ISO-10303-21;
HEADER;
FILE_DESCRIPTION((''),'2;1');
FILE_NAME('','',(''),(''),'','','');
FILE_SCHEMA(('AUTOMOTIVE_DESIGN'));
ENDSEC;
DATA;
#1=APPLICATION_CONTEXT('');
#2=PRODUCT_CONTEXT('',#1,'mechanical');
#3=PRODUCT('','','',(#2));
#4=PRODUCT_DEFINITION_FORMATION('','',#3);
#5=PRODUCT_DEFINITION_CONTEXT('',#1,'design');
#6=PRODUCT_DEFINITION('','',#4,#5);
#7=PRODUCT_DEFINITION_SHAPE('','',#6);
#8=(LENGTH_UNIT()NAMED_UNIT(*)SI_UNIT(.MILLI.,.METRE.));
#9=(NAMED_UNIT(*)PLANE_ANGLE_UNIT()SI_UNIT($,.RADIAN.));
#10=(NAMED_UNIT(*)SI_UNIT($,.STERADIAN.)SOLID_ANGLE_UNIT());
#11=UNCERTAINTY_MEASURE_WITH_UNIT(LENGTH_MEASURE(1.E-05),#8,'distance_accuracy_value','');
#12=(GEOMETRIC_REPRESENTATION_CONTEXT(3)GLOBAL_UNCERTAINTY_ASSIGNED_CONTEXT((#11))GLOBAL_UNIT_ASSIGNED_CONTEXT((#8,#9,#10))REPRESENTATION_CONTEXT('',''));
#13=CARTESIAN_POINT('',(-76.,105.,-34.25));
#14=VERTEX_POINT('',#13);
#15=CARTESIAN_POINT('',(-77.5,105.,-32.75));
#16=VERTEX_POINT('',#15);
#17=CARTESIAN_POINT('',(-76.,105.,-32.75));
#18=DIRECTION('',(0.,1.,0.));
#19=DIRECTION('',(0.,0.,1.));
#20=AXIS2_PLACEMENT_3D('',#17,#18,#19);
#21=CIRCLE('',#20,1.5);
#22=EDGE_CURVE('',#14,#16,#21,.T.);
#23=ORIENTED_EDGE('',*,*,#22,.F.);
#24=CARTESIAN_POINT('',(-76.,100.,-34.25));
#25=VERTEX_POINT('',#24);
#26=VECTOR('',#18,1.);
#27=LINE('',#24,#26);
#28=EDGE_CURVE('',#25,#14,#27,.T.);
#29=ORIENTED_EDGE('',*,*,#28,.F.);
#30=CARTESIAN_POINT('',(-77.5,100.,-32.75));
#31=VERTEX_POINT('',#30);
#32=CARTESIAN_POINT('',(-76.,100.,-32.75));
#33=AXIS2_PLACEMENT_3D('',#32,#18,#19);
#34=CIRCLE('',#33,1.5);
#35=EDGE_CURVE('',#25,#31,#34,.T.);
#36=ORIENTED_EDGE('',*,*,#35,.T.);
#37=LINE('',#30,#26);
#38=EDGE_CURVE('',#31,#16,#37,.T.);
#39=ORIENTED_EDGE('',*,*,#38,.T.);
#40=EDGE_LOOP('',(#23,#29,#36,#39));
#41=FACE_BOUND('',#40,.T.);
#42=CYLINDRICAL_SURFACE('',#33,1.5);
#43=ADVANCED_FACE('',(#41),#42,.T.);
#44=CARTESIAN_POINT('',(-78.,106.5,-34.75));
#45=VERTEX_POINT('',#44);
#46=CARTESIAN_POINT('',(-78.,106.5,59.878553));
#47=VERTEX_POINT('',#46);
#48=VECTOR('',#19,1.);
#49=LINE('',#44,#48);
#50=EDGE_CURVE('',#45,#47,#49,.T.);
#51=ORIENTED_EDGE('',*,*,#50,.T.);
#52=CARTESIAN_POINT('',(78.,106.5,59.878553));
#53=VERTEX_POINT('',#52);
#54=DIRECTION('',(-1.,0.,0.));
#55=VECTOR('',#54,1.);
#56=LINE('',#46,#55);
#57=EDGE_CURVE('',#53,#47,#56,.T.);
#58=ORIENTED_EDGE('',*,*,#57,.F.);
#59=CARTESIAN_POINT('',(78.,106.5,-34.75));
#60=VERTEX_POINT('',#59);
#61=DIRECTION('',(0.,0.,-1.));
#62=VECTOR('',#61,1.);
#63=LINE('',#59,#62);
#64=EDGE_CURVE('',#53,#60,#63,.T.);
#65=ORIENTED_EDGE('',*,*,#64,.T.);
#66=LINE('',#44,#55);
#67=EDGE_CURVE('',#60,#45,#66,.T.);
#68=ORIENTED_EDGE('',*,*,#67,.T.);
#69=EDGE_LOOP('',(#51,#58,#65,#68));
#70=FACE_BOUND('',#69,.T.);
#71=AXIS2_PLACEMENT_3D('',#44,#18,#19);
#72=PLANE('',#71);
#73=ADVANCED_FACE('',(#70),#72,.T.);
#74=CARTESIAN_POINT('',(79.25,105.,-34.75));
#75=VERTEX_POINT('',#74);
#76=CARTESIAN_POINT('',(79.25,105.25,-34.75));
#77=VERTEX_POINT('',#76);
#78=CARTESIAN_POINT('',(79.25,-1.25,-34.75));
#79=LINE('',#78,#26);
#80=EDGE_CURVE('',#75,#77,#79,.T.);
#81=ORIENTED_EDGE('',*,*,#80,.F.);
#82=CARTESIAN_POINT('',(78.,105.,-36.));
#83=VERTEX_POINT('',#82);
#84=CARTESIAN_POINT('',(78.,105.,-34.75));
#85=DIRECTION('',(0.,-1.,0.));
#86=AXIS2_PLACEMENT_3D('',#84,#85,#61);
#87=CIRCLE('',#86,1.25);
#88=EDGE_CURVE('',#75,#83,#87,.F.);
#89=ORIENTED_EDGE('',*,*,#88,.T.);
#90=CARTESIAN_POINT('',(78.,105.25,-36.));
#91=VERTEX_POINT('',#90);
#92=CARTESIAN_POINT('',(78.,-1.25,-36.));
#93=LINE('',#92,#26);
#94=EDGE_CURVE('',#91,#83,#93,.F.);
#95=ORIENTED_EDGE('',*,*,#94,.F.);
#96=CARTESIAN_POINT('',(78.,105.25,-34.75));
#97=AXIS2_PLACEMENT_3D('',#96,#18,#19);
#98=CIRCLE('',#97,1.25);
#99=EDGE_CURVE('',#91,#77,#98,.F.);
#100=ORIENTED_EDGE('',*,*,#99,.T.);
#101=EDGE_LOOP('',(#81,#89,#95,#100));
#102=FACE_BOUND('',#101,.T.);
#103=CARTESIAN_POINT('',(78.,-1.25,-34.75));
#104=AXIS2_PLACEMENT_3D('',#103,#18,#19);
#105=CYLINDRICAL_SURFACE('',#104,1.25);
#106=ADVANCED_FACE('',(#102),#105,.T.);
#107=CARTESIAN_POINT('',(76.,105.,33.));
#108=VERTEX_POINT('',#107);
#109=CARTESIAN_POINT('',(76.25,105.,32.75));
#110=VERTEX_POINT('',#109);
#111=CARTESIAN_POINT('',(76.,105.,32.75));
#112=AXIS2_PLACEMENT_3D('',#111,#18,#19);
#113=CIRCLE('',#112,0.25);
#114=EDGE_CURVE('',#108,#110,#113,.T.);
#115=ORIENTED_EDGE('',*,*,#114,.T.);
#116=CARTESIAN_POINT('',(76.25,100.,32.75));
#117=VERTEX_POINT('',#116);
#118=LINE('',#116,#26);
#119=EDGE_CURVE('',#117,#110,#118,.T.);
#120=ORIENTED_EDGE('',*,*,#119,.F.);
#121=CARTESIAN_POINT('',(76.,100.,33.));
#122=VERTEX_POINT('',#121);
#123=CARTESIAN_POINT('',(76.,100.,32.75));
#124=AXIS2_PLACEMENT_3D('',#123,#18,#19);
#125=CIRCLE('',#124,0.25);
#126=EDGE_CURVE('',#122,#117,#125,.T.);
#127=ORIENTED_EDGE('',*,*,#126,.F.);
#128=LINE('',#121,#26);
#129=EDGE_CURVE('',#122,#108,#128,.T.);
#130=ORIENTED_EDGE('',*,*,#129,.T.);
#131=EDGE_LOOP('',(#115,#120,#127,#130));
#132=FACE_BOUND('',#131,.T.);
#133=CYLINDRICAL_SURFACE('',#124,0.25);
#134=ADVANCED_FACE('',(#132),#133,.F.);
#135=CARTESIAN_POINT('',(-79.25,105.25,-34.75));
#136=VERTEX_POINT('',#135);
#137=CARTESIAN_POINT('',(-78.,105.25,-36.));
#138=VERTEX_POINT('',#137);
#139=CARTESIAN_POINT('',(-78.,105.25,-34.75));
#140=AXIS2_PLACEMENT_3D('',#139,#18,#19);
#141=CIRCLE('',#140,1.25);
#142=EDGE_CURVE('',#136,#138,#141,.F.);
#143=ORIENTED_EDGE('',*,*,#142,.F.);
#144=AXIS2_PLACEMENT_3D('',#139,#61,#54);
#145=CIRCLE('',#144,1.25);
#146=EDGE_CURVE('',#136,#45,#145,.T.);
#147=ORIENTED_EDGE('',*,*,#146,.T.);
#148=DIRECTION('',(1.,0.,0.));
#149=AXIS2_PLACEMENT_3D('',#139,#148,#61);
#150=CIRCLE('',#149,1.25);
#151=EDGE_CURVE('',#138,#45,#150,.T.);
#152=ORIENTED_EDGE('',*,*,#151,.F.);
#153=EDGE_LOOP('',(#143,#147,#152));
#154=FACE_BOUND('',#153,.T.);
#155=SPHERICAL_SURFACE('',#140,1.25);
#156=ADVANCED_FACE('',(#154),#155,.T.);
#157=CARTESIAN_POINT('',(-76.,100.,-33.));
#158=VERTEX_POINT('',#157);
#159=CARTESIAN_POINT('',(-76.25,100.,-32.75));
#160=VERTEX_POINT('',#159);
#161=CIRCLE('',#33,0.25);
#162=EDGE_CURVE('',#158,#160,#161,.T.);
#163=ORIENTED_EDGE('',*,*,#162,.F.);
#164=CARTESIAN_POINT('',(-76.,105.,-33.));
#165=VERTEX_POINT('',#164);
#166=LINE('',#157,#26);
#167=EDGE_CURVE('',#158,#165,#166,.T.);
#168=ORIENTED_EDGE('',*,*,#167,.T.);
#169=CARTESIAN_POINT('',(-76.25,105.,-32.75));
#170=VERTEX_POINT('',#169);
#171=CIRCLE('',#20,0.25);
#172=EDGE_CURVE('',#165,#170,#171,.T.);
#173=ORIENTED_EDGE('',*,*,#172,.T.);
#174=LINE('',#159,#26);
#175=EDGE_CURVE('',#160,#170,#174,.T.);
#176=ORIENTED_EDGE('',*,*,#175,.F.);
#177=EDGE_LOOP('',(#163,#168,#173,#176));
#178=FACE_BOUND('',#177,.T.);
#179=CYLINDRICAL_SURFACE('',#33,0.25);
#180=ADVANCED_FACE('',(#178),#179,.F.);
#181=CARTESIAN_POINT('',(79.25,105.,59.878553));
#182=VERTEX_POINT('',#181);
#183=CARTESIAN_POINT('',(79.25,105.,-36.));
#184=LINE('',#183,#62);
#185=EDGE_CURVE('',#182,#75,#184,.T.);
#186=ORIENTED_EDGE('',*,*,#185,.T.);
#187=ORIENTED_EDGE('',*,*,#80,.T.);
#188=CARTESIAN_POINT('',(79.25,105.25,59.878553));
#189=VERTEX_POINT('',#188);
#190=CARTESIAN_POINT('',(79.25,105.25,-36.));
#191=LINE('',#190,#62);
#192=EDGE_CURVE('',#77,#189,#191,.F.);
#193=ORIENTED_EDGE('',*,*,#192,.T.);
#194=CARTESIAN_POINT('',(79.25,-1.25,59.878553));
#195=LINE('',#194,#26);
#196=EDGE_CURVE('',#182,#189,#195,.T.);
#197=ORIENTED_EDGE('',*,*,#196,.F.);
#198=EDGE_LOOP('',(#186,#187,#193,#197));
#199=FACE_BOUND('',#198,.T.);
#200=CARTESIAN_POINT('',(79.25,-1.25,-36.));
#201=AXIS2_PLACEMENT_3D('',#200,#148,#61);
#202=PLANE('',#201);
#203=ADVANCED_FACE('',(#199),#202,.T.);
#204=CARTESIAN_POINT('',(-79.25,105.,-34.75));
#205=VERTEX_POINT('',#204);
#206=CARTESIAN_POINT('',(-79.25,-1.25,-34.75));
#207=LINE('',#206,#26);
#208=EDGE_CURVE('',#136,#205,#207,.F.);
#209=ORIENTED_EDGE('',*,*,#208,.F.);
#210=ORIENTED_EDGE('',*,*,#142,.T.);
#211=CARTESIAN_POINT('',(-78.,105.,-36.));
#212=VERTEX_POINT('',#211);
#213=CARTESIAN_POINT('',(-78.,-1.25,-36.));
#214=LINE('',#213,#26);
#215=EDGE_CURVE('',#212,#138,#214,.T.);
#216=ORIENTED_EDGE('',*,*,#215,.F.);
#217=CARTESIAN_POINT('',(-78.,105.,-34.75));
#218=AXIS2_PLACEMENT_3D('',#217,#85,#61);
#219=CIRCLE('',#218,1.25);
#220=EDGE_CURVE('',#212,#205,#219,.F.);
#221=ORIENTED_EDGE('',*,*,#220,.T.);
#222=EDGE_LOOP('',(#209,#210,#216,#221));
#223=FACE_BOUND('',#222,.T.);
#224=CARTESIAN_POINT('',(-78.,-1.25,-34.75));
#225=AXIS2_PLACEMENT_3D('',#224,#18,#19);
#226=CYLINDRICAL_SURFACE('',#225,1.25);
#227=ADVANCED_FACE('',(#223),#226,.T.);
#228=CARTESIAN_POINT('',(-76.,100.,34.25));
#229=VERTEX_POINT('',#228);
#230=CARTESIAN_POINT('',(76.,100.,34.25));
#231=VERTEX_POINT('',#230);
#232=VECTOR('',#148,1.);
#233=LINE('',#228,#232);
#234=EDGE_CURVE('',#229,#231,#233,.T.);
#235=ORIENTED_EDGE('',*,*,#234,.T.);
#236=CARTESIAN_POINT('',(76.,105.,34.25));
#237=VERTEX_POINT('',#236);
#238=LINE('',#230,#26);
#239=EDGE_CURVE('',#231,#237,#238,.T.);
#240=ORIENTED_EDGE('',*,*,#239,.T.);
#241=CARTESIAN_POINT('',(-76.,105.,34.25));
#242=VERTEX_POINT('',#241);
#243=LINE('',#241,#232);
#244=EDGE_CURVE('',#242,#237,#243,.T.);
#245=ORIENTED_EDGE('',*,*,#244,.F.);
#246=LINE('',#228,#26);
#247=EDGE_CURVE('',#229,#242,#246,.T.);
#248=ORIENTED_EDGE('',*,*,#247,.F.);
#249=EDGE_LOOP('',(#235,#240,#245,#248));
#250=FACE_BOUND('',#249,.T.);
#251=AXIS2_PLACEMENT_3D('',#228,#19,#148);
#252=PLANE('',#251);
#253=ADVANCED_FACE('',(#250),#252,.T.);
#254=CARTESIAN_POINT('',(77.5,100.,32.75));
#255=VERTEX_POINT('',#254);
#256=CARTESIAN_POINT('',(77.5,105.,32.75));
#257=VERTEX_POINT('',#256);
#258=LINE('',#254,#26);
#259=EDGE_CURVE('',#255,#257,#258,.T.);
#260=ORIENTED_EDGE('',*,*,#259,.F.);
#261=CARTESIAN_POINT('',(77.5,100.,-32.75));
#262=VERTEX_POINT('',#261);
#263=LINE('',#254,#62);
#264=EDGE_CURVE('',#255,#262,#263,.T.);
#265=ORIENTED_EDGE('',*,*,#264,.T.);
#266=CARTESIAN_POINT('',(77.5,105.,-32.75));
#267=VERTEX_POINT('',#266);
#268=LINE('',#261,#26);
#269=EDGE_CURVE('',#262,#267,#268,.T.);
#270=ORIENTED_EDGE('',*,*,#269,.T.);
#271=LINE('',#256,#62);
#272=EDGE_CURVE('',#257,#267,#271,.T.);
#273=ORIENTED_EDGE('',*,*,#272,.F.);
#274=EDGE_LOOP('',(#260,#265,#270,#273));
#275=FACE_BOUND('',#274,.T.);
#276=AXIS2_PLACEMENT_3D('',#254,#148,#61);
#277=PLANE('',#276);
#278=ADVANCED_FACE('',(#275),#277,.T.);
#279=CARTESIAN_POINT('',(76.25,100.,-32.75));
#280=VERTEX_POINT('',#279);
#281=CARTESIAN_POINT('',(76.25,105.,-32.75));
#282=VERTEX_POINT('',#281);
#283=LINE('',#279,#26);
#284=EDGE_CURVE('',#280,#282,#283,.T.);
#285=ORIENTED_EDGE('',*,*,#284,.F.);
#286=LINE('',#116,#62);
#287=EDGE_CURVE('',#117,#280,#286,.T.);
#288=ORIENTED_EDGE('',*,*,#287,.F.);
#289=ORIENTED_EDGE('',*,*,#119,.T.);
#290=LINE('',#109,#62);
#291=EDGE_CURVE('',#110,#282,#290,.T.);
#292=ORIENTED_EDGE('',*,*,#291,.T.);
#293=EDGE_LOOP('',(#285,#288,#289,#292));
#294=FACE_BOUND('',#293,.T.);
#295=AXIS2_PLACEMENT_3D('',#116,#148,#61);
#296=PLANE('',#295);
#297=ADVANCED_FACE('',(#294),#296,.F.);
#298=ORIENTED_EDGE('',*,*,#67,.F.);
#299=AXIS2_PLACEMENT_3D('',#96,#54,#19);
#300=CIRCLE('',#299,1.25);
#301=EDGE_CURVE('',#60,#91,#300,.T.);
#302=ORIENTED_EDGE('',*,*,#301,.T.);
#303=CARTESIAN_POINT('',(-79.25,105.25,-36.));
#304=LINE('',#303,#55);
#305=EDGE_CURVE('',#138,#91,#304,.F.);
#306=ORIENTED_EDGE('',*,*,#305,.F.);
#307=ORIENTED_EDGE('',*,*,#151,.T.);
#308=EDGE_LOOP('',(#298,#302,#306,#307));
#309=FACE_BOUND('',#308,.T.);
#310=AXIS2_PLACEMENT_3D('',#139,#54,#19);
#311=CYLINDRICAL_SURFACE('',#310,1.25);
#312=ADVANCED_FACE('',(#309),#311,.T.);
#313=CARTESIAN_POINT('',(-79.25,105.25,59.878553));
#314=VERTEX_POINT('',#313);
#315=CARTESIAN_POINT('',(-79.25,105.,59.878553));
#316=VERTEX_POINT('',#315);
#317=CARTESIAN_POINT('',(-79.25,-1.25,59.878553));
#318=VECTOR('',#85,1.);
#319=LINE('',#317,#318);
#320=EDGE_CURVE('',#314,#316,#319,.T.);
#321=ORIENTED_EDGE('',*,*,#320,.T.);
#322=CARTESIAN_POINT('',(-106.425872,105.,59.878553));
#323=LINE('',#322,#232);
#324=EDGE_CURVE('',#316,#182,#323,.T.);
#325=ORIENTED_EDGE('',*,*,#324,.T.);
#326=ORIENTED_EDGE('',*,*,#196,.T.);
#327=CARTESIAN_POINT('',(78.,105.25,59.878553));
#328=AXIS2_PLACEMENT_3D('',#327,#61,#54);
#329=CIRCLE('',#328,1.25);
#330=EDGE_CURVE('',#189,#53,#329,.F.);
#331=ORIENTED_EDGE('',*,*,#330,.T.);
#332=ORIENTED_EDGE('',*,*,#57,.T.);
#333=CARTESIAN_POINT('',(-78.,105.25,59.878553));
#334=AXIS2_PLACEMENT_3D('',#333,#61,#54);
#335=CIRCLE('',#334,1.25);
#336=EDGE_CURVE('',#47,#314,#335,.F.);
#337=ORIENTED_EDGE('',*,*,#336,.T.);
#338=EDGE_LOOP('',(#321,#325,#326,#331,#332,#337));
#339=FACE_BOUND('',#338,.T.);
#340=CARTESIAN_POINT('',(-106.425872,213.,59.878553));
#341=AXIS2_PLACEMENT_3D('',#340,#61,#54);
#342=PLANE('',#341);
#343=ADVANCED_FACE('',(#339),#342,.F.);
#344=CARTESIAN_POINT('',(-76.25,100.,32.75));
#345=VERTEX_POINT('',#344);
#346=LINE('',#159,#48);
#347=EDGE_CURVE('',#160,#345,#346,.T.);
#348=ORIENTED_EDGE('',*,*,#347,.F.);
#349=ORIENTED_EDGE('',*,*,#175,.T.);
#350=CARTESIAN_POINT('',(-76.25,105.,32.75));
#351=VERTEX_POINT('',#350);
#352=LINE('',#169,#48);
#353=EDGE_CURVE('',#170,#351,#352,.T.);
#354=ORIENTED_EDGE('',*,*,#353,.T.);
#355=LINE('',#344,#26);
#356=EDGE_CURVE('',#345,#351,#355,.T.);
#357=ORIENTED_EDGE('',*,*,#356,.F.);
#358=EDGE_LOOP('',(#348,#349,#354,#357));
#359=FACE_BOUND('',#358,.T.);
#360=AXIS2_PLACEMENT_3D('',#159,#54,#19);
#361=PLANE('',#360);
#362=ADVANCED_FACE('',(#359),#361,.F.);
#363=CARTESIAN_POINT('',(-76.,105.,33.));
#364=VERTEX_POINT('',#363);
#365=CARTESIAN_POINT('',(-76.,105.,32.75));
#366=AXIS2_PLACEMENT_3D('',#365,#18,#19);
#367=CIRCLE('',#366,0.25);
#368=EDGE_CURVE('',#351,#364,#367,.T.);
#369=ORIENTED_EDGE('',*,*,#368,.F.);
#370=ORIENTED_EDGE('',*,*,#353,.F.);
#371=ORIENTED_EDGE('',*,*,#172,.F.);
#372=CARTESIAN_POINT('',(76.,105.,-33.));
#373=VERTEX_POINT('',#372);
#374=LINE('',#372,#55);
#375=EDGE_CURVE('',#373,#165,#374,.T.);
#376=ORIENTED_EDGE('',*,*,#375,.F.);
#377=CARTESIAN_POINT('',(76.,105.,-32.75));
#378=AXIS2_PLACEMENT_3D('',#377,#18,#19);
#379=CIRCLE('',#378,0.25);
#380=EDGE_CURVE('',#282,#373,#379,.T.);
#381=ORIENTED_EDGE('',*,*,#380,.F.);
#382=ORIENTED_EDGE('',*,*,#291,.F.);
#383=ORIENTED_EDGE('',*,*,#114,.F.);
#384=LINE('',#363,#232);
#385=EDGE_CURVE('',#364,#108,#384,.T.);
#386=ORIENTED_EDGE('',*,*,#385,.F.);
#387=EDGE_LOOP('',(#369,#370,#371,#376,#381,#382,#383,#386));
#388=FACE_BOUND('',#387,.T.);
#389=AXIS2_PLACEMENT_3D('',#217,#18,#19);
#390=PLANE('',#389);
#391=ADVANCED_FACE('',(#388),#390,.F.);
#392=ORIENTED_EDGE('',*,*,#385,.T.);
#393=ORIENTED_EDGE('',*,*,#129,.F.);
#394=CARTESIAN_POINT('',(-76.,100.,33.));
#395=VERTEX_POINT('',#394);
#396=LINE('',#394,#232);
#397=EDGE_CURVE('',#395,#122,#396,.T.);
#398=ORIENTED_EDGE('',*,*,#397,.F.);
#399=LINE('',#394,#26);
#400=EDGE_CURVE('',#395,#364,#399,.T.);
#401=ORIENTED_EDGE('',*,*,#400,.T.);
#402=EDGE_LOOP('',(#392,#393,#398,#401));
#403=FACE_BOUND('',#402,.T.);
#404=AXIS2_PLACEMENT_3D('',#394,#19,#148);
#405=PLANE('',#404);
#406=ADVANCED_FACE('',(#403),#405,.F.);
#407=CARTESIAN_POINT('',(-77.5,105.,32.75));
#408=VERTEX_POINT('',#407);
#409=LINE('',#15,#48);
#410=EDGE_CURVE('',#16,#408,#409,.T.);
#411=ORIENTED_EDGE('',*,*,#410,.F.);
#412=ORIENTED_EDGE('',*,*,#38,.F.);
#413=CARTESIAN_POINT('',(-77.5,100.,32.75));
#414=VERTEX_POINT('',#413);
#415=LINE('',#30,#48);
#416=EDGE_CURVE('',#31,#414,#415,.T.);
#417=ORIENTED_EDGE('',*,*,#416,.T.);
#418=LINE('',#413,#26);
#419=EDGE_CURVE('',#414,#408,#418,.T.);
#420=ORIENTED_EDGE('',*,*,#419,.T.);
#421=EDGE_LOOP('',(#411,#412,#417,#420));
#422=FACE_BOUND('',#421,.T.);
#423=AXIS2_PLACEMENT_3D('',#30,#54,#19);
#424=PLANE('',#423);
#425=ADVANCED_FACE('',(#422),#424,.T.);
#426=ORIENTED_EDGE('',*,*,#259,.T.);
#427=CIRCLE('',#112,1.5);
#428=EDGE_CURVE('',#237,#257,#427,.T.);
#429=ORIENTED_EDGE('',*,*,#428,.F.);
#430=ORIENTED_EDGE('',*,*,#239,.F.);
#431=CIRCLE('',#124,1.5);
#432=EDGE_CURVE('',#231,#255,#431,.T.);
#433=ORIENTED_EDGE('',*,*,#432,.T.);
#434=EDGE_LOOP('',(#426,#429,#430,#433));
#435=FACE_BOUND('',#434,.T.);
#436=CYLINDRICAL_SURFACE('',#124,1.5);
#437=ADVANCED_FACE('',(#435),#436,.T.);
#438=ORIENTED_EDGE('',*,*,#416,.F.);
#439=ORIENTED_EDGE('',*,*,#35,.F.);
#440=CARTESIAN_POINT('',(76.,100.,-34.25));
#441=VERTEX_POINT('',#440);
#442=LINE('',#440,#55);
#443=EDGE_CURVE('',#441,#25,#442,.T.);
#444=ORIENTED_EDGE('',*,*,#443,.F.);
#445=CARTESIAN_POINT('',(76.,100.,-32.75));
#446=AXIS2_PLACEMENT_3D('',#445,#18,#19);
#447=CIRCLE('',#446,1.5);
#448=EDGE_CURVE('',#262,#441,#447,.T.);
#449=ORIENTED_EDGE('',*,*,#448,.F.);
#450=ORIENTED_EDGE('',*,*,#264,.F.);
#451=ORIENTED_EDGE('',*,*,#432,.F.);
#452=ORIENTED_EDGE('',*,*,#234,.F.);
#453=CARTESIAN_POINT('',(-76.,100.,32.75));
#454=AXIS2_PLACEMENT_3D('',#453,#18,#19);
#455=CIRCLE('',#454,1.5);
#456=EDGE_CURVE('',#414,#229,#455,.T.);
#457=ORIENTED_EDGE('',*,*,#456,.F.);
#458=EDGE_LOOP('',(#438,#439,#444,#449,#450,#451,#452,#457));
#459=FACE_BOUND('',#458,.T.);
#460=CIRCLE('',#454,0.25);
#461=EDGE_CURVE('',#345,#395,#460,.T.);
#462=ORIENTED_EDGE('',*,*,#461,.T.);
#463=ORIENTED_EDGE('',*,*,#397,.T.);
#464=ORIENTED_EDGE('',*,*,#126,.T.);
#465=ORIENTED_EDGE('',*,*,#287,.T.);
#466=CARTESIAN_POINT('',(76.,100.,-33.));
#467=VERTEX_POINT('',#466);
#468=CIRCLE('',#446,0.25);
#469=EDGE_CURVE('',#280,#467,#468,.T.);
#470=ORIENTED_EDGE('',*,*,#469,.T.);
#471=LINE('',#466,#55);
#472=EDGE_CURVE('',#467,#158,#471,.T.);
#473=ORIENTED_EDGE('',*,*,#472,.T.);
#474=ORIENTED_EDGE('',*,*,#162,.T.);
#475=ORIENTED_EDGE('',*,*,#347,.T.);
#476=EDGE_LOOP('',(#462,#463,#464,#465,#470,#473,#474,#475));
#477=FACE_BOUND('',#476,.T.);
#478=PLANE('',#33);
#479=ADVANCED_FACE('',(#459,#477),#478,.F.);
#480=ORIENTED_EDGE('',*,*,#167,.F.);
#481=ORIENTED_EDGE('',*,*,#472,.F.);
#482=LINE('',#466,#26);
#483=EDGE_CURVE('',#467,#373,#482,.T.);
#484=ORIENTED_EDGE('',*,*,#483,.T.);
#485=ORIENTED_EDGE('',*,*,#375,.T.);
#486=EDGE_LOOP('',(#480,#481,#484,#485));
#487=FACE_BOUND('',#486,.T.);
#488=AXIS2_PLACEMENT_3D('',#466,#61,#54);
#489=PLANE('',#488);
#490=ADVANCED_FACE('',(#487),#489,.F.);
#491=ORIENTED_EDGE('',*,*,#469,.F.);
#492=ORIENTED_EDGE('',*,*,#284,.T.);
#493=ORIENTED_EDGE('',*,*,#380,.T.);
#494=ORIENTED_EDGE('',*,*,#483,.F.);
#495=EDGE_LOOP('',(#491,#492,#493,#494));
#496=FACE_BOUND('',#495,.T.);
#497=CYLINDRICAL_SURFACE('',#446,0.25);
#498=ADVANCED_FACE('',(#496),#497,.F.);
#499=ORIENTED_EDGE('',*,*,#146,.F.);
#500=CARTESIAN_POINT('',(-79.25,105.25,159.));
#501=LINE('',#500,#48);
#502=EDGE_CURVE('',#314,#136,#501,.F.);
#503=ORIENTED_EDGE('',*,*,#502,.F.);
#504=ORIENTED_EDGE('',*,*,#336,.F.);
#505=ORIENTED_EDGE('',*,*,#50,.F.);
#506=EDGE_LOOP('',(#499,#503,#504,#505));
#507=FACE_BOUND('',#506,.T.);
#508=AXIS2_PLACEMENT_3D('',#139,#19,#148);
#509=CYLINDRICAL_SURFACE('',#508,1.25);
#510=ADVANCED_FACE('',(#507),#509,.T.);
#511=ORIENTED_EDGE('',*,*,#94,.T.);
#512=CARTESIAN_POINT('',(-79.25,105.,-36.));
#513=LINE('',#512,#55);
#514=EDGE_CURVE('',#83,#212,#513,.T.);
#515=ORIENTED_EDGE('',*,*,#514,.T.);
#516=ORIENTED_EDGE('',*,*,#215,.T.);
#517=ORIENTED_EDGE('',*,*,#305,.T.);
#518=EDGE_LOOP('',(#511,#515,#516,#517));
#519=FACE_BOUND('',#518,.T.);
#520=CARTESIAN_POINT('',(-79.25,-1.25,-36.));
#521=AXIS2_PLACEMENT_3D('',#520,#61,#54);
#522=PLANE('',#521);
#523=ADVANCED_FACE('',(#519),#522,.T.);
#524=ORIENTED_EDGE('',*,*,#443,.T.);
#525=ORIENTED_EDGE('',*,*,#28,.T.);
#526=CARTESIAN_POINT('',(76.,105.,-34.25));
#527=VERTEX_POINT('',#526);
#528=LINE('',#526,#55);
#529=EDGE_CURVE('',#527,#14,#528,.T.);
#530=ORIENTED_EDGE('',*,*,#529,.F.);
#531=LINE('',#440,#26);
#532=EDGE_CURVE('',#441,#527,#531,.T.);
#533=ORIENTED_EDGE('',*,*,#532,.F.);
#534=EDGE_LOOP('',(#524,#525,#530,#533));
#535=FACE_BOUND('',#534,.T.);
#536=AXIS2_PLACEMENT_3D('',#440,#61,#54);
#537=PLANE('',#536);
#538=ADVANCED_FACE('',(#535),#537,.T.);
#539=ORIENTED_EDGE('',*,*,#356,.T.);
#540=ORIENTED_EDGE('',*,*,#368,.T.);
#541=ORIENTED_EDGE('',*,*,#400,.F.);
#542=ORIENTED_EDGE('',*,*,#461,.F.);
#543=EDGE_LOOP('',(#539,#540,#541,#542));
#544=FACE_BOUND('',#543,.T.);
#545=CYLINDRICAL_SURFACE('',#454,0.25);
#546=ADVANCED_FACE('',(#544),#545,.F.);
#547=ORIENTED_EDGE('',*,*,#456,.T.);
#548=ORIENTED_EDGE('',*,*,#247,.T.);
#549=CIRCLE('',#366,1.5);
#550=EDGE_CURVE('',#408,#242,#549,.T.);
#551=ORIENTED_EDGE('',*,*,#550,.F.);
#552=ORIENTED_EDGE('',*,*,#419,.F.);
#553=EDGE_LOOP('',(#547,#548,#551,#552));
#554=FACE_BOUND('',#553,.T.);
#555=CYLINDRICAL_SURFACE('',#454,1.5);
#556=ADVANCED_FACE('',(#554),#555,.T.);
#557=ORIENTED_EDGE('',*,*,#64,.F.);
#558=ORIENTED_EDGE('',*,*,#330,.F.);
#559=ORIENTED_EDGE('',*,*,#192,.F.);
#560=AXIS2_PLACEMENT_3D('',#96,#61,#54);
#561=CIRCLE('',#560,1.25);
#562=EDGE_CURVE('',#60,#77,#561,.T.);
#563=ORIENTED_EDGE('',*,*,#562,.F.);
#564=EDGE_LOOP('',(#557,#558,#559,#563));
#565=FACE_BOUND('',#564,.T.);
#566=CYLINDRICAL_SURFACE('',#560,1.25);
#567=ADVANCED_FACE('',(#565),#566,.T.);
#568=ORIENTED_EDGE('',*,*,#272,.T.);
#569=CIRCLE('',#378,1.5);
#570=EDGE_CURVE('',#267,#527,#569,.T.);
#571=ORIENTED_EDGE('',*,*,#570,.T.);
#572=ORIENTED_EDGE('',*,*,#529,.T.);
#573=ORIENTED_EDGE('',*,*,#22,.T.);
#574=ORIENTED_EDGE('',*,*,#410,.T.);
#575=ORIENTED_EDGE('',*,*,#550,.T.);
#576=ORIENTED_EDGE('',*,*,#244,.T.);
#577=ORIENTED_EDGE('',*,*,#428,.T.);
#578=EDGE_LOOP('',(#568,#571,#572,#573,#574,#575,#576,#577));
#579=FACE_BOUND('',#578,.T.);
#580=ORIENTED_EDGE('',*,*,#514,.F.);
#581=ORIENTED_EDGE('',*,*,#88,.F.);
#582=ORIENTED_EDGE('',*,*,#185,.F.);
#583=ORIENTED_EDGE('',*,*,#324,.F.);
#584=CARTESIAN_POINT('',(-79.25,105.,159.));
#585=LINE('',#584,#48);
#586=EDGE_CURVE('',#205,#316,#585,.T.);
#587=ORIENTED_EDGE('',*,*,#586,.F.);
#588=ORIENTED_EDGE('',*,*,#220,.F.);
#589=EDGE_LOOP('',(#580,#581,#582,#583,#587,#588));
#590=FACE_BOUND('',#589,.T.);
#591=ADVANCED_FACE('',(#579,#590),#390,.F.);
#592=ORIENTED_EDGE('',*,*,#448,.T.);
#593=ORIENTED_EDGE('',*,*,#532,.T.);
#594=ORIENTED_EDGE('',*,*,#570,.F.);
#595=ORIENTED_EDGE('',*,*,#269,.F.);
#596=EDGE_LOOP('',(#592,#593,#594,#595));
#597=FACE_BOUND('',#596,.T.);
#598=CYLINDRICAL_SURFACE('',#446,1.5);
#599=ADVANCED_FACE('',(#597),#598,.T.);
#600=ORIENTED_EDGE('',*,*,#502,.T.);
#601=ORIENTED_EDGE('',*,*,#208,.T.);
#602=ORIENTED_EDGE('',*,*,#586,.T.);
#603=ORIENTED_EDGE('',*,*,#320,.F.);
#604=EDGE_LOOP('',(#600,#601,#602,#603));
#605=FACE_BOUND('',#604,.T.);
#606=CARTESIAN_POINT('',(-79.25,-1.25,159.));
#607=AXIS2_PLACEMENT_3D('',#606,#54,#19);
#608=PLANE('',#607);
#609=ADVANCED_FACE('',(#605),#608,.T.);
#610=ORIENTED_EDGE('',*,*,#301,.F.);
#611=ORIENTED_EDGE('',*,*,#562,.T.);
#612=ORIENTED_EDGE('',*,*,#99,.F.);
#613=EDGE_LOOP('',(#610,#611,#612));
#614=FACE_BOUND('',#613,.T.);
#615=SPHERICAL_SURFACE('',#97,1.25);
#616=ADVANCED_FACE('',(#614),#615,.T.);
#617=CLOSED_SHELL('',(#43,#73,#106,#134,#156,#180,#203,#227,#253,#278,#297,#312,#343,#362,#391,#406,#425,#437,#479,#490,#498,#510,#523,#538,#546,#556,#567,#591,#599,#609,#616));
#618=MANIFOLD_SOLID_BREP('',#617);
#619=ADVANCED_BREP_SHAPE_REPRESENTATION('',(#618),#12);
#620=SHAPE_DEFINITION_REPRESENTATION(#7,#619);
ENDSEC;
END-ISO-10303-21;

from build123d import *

# Parameters (mm, degrees)
BOSS_EXTRUDE1_DEPTH      = 1.25
SKETCH1_W                = 156
SKETCH1_H                = 69.5
BOSS_EXTRUDE2_DEPTH      = 105
SKETCH4_R                = 2.5000000000000027
BOSS_EXTRUDE3_DEPTH      = 8
FILLET2_R                = 2
SKETCH5_R                = 1.5499999999999998
SKETCH5_R_2              = 1.5500000000000012
CUT_EXTRUDE1_DEPTH       = 8
SKETCH6_R                = 8.25
CUT_EXTRUDE2_DEPTH       = 8
SKETCH8_R                = 3.750000000000007
SKETCH8_R_2              = 3.0000000000000084
SKETCH8_W                = 7.000000000000014
SKETCH8_H                = 14
CUT_EXTRUDE3_DEPTH       = 8
FILLET3_R                = 1.25
FILLET4_R                = 1.25
SKETCH11_R               = 1.5499999999999932
CUT_EXTRUDE4_DEPTH       = 8
BOSS_EXTRUDE5_REACH      = 209.004
FILLET5_R                = 1.25
SKETCH14_R               = 1.5249999999999995
CUT_EXTRUDE5_DEPTH       = 8
BOSS_EXTRUDE6_DEPTH      = 5
CUT_EXTRUDE10_DEPTH      = 176.50000000000017
CUT_EXTRUDE10_DEPTH_BACK = 9
SKETCH19_R               = 1.5249999999999995
BOSS_EXTRUDE7_DEPTH      = 1.5
SKETCH17_W               = 214.39373035957487
SKETCH17_H               = 311.75060194691184
CUT_EXTRUDE6_DEPTH       = 142.50000000000003
SKETCH18_W               = 843.8612520819788
SKETCH18_H               = 210.19069540658822
CUT_EXTRUDE7_DEPTH       = 211.50000000000009
FILLET6_R                = 1.25
SKETCH21_R               = 1.5249999999999995
CUT_EXTRUDE11_DEPTH      = 46.50000000000004
SKETCH22_R               = 1.5249999999999952
SKETCH22_R_2             = 0.49999999999999917
SKETCH22_R_3             = 0.9999999999999983
CUT_EXTRUDE12_DEPTH      = 46.50000000000004
SKETCH23_W               = 224.34927592813784
SKETCH23_H               = 20
CUT_EXTRUDE13_DEPTH      = 108.00000000000004
SKETCH24_W               = 223.8278832276348
SKETCH24_H               = 83.20006380200533
CUT_EXTRUDE14_DEPTH      = 108.00000000000004


with BuildPart() as part:
    # Sketch2 → Boss-Extrude1 (new body)
    with BuildSketch(Plane(origin=(0, 0, 0), x_dir=(1, 0, 0), z_dir=(0, 1, 0))):
        Polygon((-79.25000000000004, 35.99999999999998), (79.24999999999996, 35.99999999999999), (79.24999999999999, -159.00000000000003), (-79.25000000000001, -159.00000000000003), align=None)
    extrude(amount=-BOSS_EXTRUDE1_DEPTH)

    # Sketch1 → Boss-Extrude2 (add)
    with BuildSketch(Plane(origin=(0, 0, 0), x_dir=(1, 0, 0), z_dir=(0, 1, 0))):
        Polygon((79.24999999999999, -159.00000000000003), (-79.25000000000001, -159.00000000000003), (-79.25000000000004, -86.00000000000001), (-79.25000000000004, -36.00000000000002), (-79.25000000000004, 35.99999999999998), (79.24999999999996, 35.99999999999999), (79.24999999999996, -36.00000000000002), (79.24999999999996, -86.00000000000001), align=None)
        Polygon((-78.00000000000001, -157.75000000000006), (77.99999999999999, -157.75000000000006), (77.99999999999996, -86.00000000000001), (77.99999999999996, -36.00000000000002), (-78.00000000000004, -36.00000000000002), (-78.00000000000004, -86.00000000000001), (-78.00000000000004, -100.58859756900745), align=None, mode=Mode.SUBTRACT)
        Rectangle(SKETCH1_W, SKETCH1_H, mode=Mode.SUBTRACT)
    extrude(amount=BOSS_EXTRUDE2_DEPTH)

    # Sketch4 → Boss-Extrude3 (add)
    with BuildSketch(Plane(origin=(0, 0, 0), x_dir=(1, 0, 0), z_dir=(0, 1, 0))):
        with Locations(Location((-37.074999999999996, -117.75000000000004, 0), (0, 0, 90))):
            Circle(SKETCH4_R)
        with Locations(Location((37.074999999999996, -117.75000000000003, 0), (0, 0, 90))):
            Circle(SKETCH4_R)
    extrude(amount=BOSS_EXTRUDE3_DEPTH)

    # Fillet2
    fillet2_edges = [part.edges().sort_by_distance(p)[0] for p in [
        (77.99999999999996, 52.5, -34.749999999999986),
        (77.99999999999996, 52.5, 34.750000000000014),
        (-78.00000000000004, 0, 1.421e-14),
        (-78.00000000000004, 52.5, 34.750000000000014),
        (77.99999999999999, 52.5, 157.75000000000006),
        (-78.00000000000001, 52.5, 157.75000000000006),
        (-4.263e-14, 0, 36.00000000000002),
        (-78.00000000000004, 52.5, 36.00000000000002),
        (77.99999999999997, 0, 96.87500000000003),
        (77.99999999999996, 52.5, 36.00000000000002),
        (-4.263e-14, 0, -34.749999999999986),
        (-78.00000000000004, 52.5, -34.749999999999986),
        (-1.421e-14, 0, 157.75000000000006),
        (-78.00000000000003, 0, 96.87500000000004),
        (77.99999999999996, 0, 1.421e-14),
        (-4.263e-14, 0, 34.750000000000014),
        (-37.074999999999996, 0, 120.25000000000004),
        (37.074999999999996, 0, 120.25000000000003),
    ]]
    fillet(fillet2_edges, radius=FILLET2_R)

    # Sketch5 → Cut-Extrude1 (cut)
    with BuildSketch(Plane.XY.offset(36.00000000000002)):
        with BuildLine():
            ThreePointArc((-53.750000000000085, 99.54999999999998), (-54.84601551083924, 99.09601551083914), (-55.30000000000008, 97.99999999999999))
            Line((-55.30000000000008, 97.99999999999999), (-53.750000000000085, 97.99999999999999))
            Line((-53.750000000000085, 97.99999999999999), (-53.750000000000085, 99.54999999999998))
        make_face()
        with BuildLine():
            Line((-53.750000000000085, 97.99999999999999), (-55.30000000000008, 97.99999999999999))
            ThreePointArc((-55.30000000000008, 97.99999999999999), (-53.750000000000085, 96.44999999999999), (-52.20000000000009, 97.99999999999999))
            ThreePointArc((-52.20000000000009, 97.99999999999999), (-52.65398448916093, 99.09601551083914), (-53.750000000000085, 99.54999999999998))
            Line((-53.750000000000085, 99.54999999999998), (-53.750000000000085, 97.99999999999999))
        make_face()
        with Locations((53.750000000000206, 97.99999999999967)):
            Circle(SKETCH5_R)
        with Locations((-53.750000000000085, 7.999999999999743)):
            Circle(SKETCH5_R_2)
        with Locations((53.749999999999666, 7.9999999999994245)):
            Circle(SKETCH5_R_2)
    extrude(amount=-CUT_EXTRUDE1_DEPTH, mode=Mode.SUBTRACT)

    # Sketch6 → Cut-Extrude2 (cut)
    with BuildSketch(Plane(origin=(0, 0, 157.75000000000006), x_dir=(-1, 0, 0), z_dir=(0, 0, -1))):
        with Locations((0, 22)):
            Circle(SKETCH6_R)
    extrude(amount=-CUT_EXTRUDE2_DEPTH, mode=Mode.SUBTRACT)

    # Sketch8 → Cut-Extrude3 (cut)
    with BuildSketch(Plane.ZY.offset(79.25000000000004)):
        with Locations((131.5, 54.99999999999998)):
            Circle(SKETCH8_R)
        with Locations((101.50000000000001, 54.99999999999998)):
            Circle(SKETCH8_R_2)
        with Locations((116.50000000000003, 64.99999999999999)):
            Rectangle(SKETCH8_W, SKETCH8_H)
        with Locations((101.50000000000001, 64.99999999999997)):
            Circle(SKETCH8_R_2)
        with Locations((101.50000000000001, 74.99999999999997)):
            Circle(SKETCH8_R_2)
        with Locations((101.50000000000001, 84.99999999999997)):
            Circle(SKETCH8_R_2)
        with Locations((131.5, 74.99999999999999)):
            Circle(SKETCH8_R)
    extrude(amount=-CUT_EXTRUDE3_DEPTH, mode=Mode.SUBTRACT)

    # Fillet3
    fillet3_edges = [part.edges().sort_by_distance(p)[0] for p in [
        (79.24999999999997, -1.25, 61.50000000000002),
        (-4.263e-14, -1.25, -35.999999999999986),
        (-79.25000000000003, -1.25, 61.50000000000003),
        (-1.421e-14, -1.25, 159.00000000000003),
    ]]
    fillet(fillet3_edges, radius=FILLET3_R)

    # Fillet4
    # the kernel refuses this fillet: 1.25 mm, written as the material it takes off along each edge
    with BuildSketch(Plane(origin=(-78.00000000000004, 0, -34.74999999999997), x_dir=(-9e-17, 0, -1), z_dir=(-1, 0, 1.5e-16))) as fillet4_piece_1_section:
        Polygon((0, 0), (FILLET4_R, 0), (FILLET4_R, FILLET4_R), (0, FILLET4_R), align=None)
    fillet4_piece_1 = extrude(amount=FILLET4_R, mode=Mode.PRIVATE)
    fillet4_piece_1 = fillet4_piece_1 - Plane(origin=(-78.00000000000004, 0, -34.74999999999997), x_dir=(0, 0.7071067811865475, 0.7071067811865475), z_dir=(-1, 0, 1.5e-16)) * Sphere(FILLET4_R, mode=Mode.PRIVATE)
    add(fillet4_piece_1, mode=Mode.SUBTRACT)
    with BuildSketch(Plane(origin=(77.99999999999996, 0, -34.74999999999999), x_dir=(-9e-17, 0, -1), z_dir=(1, 0, -1.5e-16))) as fillet4_piece_2_section:
        Polygon((0, 0), (FILLET4_R, 0), (FILLET4_R, -FILLET4_R), (0, -FILLET4_R), align=None)
    fillet4_piece_2 = extrude(amount=FILLET4_R, mode=Mode.PRIVATE)
    fillet4_piece_2 = fillet4_piece_2 - Plane(origin=(77.99999999999996, 0, -34.74999999999999), x_dir=(0, 0.7071067811865475, 0.7071067811865475), z_dir=(1, 0, -1.5e-16)) * Sphere(FILLET4_R, mode=Mode.PRIVATE)
    add(fillet4_piece_2, mode=Mode.SUBTRACT)
    with BuildSketch(Plane(origin=(-78.00000000000001, 0, 157.75000000000003), x_dir=(-1, 0, 1.5e-16), z_dir=(0, 0, 1))) as fillet4_piece_3_section:
        Polygon((0, 0), (FILLET4_R, 0), (FILLET4_R, FILLET4_R), (0, FILLET4_R), align=None)
    fillet4_piece_3 = extrude(amount=FILLET4_R, mode=Mode.PRIVATE)
    fillet4_piece_3 = fillet4_piece_3 - Plane(origin=(-78.00000000000001, 0, 157.75000000000003), x_dir=(0.7071067811865475, 0.7071067811865475, 0), z_dir=(0, 0, 1)) * Sphere(FILLET4_R, mode=Mode.PRIVATE)
    add(fillet4_piece_3, mode=Mode.SUBTRACT)
    with BuildSketch(Plane(origin=(77.99999999999999, 0, 157.75000000000003), x_dir=(1, 0, -1.5e-16), z_dir=(0, 0, 1))) as fillet4_piece_4_section:
        Polygon((0, 0), (FILLET4_R, 0), (FILLET4_R, -FILLET4_R), (0, -FILLET4_R), align=None)
    fillet4_piece_4 = extrude(amount=FILLET4_R, mode=Mode.PRIVATE)
    fillet4_piece_4 = fillet4_piece_4 - Plane(origin=(77.99999999999999, 0, 157.75000000000003), x_dir=(-0.7071067811865475, 0.7071067811865475, 0), z_dir=(0, 0, 1)) * Sphere(FILLET4_R, mode=Mode.PRIVATE)
    add(fillet4_piece_4, mode=Mode.SUBTRACT)
    with BuildSketch(Plane(origin=(79.24999999999999, 108.12500000000007, 159.00000000000003), x_dir=(-1, 0, 0), z_dir=(0, -1, 0))) as fillet4_piece_5:
        with BuildLine():
            CenterArc((FILLET4_R, FILLET4_R), FILLET4_R, 179.9999999999987, 90.00000000000131)
            Line((0, FILLET4_R), (0, 0))
            Line((0, 0), (FILLET4_R, 0))
        make_face()
    extrude(amount=108.12500000000007, mode=Mode.SUBTRACT)
    with BuildSketch(Plane(origin=(-79.25000000000001, -2.2e-16, 159.00000000000003), x_dir=(1, 0, 0), z_dir=(0, 1, 0))) as fillet4_piece_6:
        with BuildLine():
            CenterArc((FILLET4_R, FILLET4_R), FILLET4_R, 180, 90)
            Line((0, FILLET4_R), (0, 0))
            Line((0, 0), (FILLET4_R, 0))
        make_face()
    extrude(amount=108.12499999999999, mode=Mode.SUBTRACT)
    with BuildSketch(Plane(origin=(79.24999999999996, 108.125, -35.99999999999999), x_dir=(0, 0, 1), z_dir=(0, -1, 0))) as fillet4_piece_7:
        with BuildLine():
            CenterArc((FILLET4_R, FILLET4_R), FILLET4_R, 180, 90)
            Line((0, FILLET4_R), (0, 0))
            Line((0, 0), (FILLET4_R, 0))
        make_face()
    extrude(amount=108.125, mode=Mode.SUBTRACT)
    with BuildSketch(Plane(origin=(-79.25000000000004, -2.2e-16, -35.99999999999998), x_dir=(0, 0, 1), z_dir=(0, 1, 0))) as fillet4_piece_8:
        with BuildLine():
            CenterArc((FILLET4_R, FILLET4_R), FILLET4_R, 180, 90)
            Line((-2.132e-14, FILLET4_R), (0, 0))
            Line((0, 0), (FILLET4_R, 0))
        make_face()
    extrude(amount=108.12499999999999, mode=Mode.SUBTRACT)

    # Sketch11 → Cut-Extrude4 (cut)
    with BuildSketch(Plane(origin=(79.24999999999996, 0, -1.128e-14), x_dir=(-1.4e-16, 0, -1), z_dir=(1, 0, -1.4e-16))):
        with BuildLine():
            ThreePointArc((-13.05000000000001, 102.49999999999999), (-12.596015510839159, 101.40398448916083), (-11.50000000000001, 100.94999999999999))
            Line((-11.50000000000001, 100.94999999999999), (-11.50000000000001, 102.49999999999999))
            Line((-11.500000000000014, 102.49999999999999), (-13.050000000000011, 102.49999999999999))
        make_face()
        with BuildLine():
            Line((-11.50000000000001, 102.49999999999999), (-11.50000000000001, 100.94999999999999))
            ThreePointArc((-11.50000000000001, 100.94999999999999), (-10.403984489160864, 101.40398448916083), (-9.950000000000012, 102.49999999999999))
            ThreePointArc((-9.950000000000012, 102.49999999999999), (-11.50000000000001, 104.04999999999998), (-13.05000000000001, 102.49999999999999))
            Line((-13.050000000000011, 102.49999999999999), (-11.500000000000014, 102.49999999999999))
        make_face()
        with BuildLine():
            ThreePointArc((-25.550000000000008, 90), (-25.096015510839155, 88.90398448916085), (-24.000000000000007, 88.45))
            Line((-24.000000000000007, 88.45000000000002), (-24.000000000000007, 90))
            Line((-24, 90), (-25.55000000000001, 90))
        make_face()
        with BuildLine():
            Line((-24.000000000000007, 90), (-24.000000000000007, 88.45000000000002))
            ThreePointArc((-24.000000000000007, 88.45), (-22.90398448916086, 88.90398448916085), (-22.450000000000006, 90))
            ThreePointArc((-22.450000000000006, 90), (-24.000000000000007, 91.55), (-25.550000000000008, 90))
            Line((-25.55000000000001, 90), (-24, 90))
        make_face()
        with BuildLine():
            ThreePointArc((-9.949999999999998, 2.4999999999999742), (-10.403984489160848, 3.5960155108391216), (-11.499999999999995, 4.049999999999974))
            Line((-11.499999999999996, 4.049999999999969), (-11.499999999999996, 2.4999999999999716))
            Line((-11.5, 2.4999999999999742), (-13.049999999999997, 2.4999999999999742))
            ThreePointArc((-13.049999999999995, 2.4999999999999742), (-11.499999999999996, 0.9499999999999749), (-9.949999999999998, 2.499999999999974))
        make_face()
        with BuildLine():
            Line((-11.499999999999996, 2.4999999999999716), (-11.499999999999996, 4.049999999999969))
            ThreePointArc((-11.499999999999995, 4.049999999999974), (-12.596015510839145, 3.596015510839123), (-13.049999999999995, 2.4999999999999742))
            Line((-13.049999999999997, 2.4999999999999742), (-11.5, 2.4999999999999742))
        make_face()
        with BuildLine():
            ThreePointArc((-111.5, 4.049999999999969), (-112.59601551083915, 1.40398448916083), (-109.95, 2.499999999999974))
            Line((-109.95, 2.4999999999999742), (-111.5, 2.4999999999999742))
            Line((-111.5, 2.4999999999999716), (-111.5, 4.049999999999969))
        make_face()
        with BuildLine():
            Line((-111.5, 2.4999999999999742), (-109.95, 2.4999999999999742))
            ThreePointArc((-109.95, 2.4999999999999742), (-110.40398448916086, 3.5960155108391185), (-111.5, 4.049999999999969))
            Line((-111.5, 4.049999999999969), (-111.5, 2.4999999999999716))
        make_face()
        with BuildLine():
            ThreePointArc((-97.45, 14.999999999999993), (-97.90398448916086, 16.096015510839138), (-99, 16.549999999999986))
            Line((-99, 16.549999999999986), (-99, 14.999999999999993))
            Line((-99, 14.999999999999993), (-97.45, 14.999999999999993))
        make_face()
        with BuildLine():
            Line((-99, 14.999999999999993), (-99, 16.549999999999986))
            ThreePointArc((-99, 16.549999999999986), (-100.09601551083915, 13.903984489160848), (-97.45, 14.999999999999993))
            Line((-97.45, 14.999999999999993), (-99, 14.999999999999993))
        make_face()
        with BuildLine():
            ThreePointArc((-22.450000000000006, 14.999999999999993), (-22.90398448916086, 16.09601551083914), (-24.000000000000007, 16.549999999999994))
            Line((-24.000000000000007, 16.549999999999994), (-24.000000000000007, 14.999999999999993))
            Line((-24, 14.999999999999993), (-25.55000000000001, 14.999999999999993))
            ThreePointArc((-25.550000000000008, 14.999999999999993), (-24.000000000000007, 13.449999999999992), (-22.450000000000006, 14.999999999999993))
        make_face()
        with BuildLine():
            Line((-24.000000000000007, 14.999999999999993), (-24.000000000000007, 16.549999999999994))
            ThreePointArc((-24.000000000000007, 16.549999999999994), (-25.096015510839155, 16.09601551083914), (-25.550000000000008, 14.999999999999993))
            Line((-25.55000000000001, 14.999999999999993), (-24, 14.999999999999993))
        make_face()
        with Locations((-111.50000000000001, 102.49999999999999)):
            Circle(SKETCH11_R)
        with Locations((-99, 90)):
            Circle(SKETCH11_R)
    extrude(amount=-CUT_EXTRUDE4_DEPTH, mode=Mode.SUBTRACT)

    # Boss-Extrude5: up to this face of the body (flat: up to its plane)
    boss_extrude5_end = Plane(part.part.faces().sort_by_distance((0, 0, 96.725539908))[0])
    # Sketch12 → Boss-Extrude5 (add, up to the picked face)
    with BuildSketch(Plane(origin=(0, 105, 0), x_dir=(1, 0, 0), z_dir=(0, 1, 0)), mode=Mode.PRIVATE) as boss_extrude5_sk1:
        with BuildLine():
            Line((73, -152.75000000000043), (72.99999999999997, -157.75000000000043))
            Line((72.99999999999997, -157.75000000000043), (75.99999999999996, -157.75000000000045))
            ThreePointArc((75.99999999999996, -157.75000000000006), (77.41421356237305, -157.16421356237316), (77.99999999999994, -155.75000000000006))
            Line((77.99999999999999, -155.75000000000006), (78, -152.75000000000045))
            Line((78, -152.75000000000045), (73, -152.75000000000043))
        make_face()
    boss_extrude5_tool1 = split(extrude(boss_extrude5_sk1.sketch, amount=-BOSS_EXTRUDE5_REACH, mode=Mode.PRIVATE), bisect_by=boss_extrude5_end, keep=Keep.BOTH, mode=Mode.PRIVATE)
    # Sketch12 → Boss-Extrude5 (add, up to the picked face)
    with BuildSketch(Plane(origin=(0, 105, 0), x_dir=(1, 0, 0), z_dir=(0, 1, 0)), mode=Mode.PRIVATE) as boss_extrude5_sk2:
        with BuildLine():
            ThreePointArc((-78.00000000000003, -155.75000000000006), (-77.41421356237313, -157.16421356237316), (-76.00000000000003, -157.75000000000006))
            Line((-76.00000000000003, -157.75000000000006), (-73.00000000000003, -157.75000000000006))
            Line((-73.00000000000003, -157.75000000000006), (-73.00000000000003, -152.75000000000006))
            Line((-73.00000000000003, -152.75000000000006), (-78.00000000000003, -152.75000000000006))
            Line((-78.00000000000003, -152.75000000000006), (-78.00000000000003, -155.75000000000006))
        make_face()
    boss_extrude5_tool2 = split(extrude(boss_extrude5_sk2.sketch, amount=-BOSS_EXTRUDE5_REACH, mode=Mode.PRIVATE), bisect_by=boss_extrude5_end, keep=Keep.BOTH, mode=Mode.PRIVATE)
    add(boss_extrude5_tool1.solids().sort_by(Axis((75.426992, 105, 155.176992), (0, -1, 0)))[0])
    add(boss_extrude5_tool2.solids().sort_by(Axis((-75.426992, 105, 155.176992), (0, -1, 0)))[0])

    # Fillet5
    fillet5_edges = [part.edges().sort_by_distance(p)[0] for p in [
        (77.41421356237306, 0.5857864376269042, 152.75000000000043),
        (72.99999999999999, 0.5857864376269046, 157.16421356237316),
        (72.99999999999997, 53.5, 157.75000000000043),
        (74.49999999999999, 0, 152.75000000000043),
        (73, 52.5, 152.75000000000043),
        (78, 53.5, 152.75000000000045),
        (73, 0, 154.25000000000023),
        (-77.41421356237313, 0.5857864376269042, 152.75000000000006),
        (-73.00000000000003, 0, 154.25000000000006),
        (-73.00000000000003, 52.5, 152.75000000000006),
        (-78.00000000000003, 53.5, 152.75000000000006),
        (-74.50000000000003, 0, 152.75000000000006),
        (-73.00000000000003, 0.5857864376269046, 157.16421356237316),
        (-73.00000000000003, 53.5, 157.75000000000006),
    ]]
    fillet(fillet5_edges, radius=FILLET5_R)

    # Sketch14 → Cut-Extrude5 (cut)
    with BuildSketch(Plane(origin=(0, 105, 0), x_dir=(1, 0, 0), z_dir=(0, 1, 0))):
        with Locations(Location((75.68305826175839, -155.43305826175865, 0), (0, 0, 270))):
            Circle(SKETCH14_R)
        with Locations(Location((-75.68305826175845, -155.43305826175828, 0), (0, 0, 270))):
            Circle(SKETCH14_R)
    extrude(amount=-CUT_EXTRUDE5_DEPTH, mode=Mode.SUBTRACT)

    # Sketch19 → Cut-Extrude10 (cut, two sides: drawn at the far end of the back side and taken through both)
    with BuildSketch(Plane(origin=(0, 105, 0), x_dir=(1, 0, 0), z_dir=(0, 1, 0)).offset(-CUT_EXTRUDE10_DEPTH_BACK)):
        with Locations(Location((75.68305826175839, -155.43305826175865, 0), (0, 0, 270))):
            Circle(SKETCH19_R)
        with Locations(Location((-75.68305826175845, -155.43305826175828, 0), (0, 0, 270))):
            Circle(SKETCH19_R)
    extrude(amount=CUT_EXTRUDE10_DEPTH + CUT_EXTRUDE10_DEPTH_BACK, mode=Mode.SUBTRACT)



with BuildPart() as body_2:
    # Sketch15 → Boss-Extrude6 (new body)
    with BuildSketch(Plane(origin=(0, 105, 0), x_dir=(1, 0, 0), z_dir=(0, 1, 0))):
        with BuildLine():
            Line((-77.50000000000004, 32.749999999999986), (-77.50000000000004, -32.750000000000014))
            ThreePointArc((-77.50000000000004, -32.750000000000014), (-77.06066017177986, -33.81066017177984), (-76.00000000000004, -34.250000000000014))
            Line((-76.00000000000004, -34.250000000000014), (75.99999999999996, -34.250000000000014))
            ThreePointArc((75.99999999999996, -34.250000000000014), (77.06066017177977, -33.81066017177984), (77.49999999999996, -32.750000000000014))
            Line((77.49999999999996, -32.750000000000014), (77.49999999999996, 32.749999999999986))
            ThreePointArc((77.49999999999996, 32.749999999999986), (77.06066017177977, 33.81066017177981), (75.99999999999996, 34.249999999999986))
            Line((75.99999999999996, 34.249999999999986), (-76.00000000000004, 34.249999999999986))
            ThreePointArc((-76.00000000000004, 34.249999999999986), (-77.06066017177986, 33.81066017177981), (-77.50000000000004, 32.749999999999986))
        make_face()
        with BuildLine():
            Line((75.99999999999996, 32.999999999999986), (-76.00000000000004, 32.999999999999986))
            ThreePointArc((-76.00000000000004, 32.999999999999986), (-76.17677669529668, 32.926776695296624), (-76.25000000000004, 32.749999999999986))
            Line((-76.25000000000004, 32.749999999999986), (-76.25000000000004, -32.750000000000014))
            ThreePointArc((-76.25000000000004, -32.750000000000014), (-76.17677669529668, -32.92677669529665), (-76.00000000000004, -33.000000000000014))
            Line((-76.00000000000004, -33.000000000000014), (75.99999999999996, -33.000000000000014))
            ThreePointArc((75.99999999999996, -33.000000000000014), (76.1767766952966, -32.92677669529665), (76.24999999999996, -32.750000000000014))
            Line((76.24999999999996, -32.750000000000014), (76.24999999999996, 32.749999999999986))
            ThreePointArc((76.24999999999996, 32.749999999999986), (76.1767766952966, 32.926776695296624), (75.99999999999996, 32.999999999999986))
        make_face(mode=Mode.SUBTRACT)
    extrude(amount=-BOSS_EXTRUDE6_DEPTH)


with BuildPart() as part_1:
    add(part.part)

    add(body_2.part)  # Boss-Extrude7 merges body 2
    # Sketch16 → Boss-Extrude7 (add)
    with BuildSketch(Plane(origin=(0, 105, 0), x_dir=(1, 0, 0), z_dir=(0, 1, 0))):
        with BuildLine():
            Line((-79.25000000000004, 34.74999999999998), (-79.25000000000004, -157.75000000000003))
            ThreePointArc((-79.25000000000004, -157.75000000000003), (-78.88388347648322, -158.63388347648322), (-78.00000000000001, -159.00000000000003))
            Line((-78.00000000000001, -159.00000000000003), (77.99999999999999, -159.00000000000003))
            ThreePointArc((77.99999999999999, -159.00000000000003), (78.88388347648316, -158.63388347648322), (79.24999999999999, -157.75000000000003))
            Line((79.24999999999999, -157.75000000000003), (79.24999999999991, 34.749999999999986))
            ThreePointArc((79.24999999999991, 34.749999999999986), (78.8838834764831, 35.63388347648314), (77.99999999999996, 35.99999999999997))
            Line((77.99999999999996, 35.99999999999997), (-78.00000000000004, 35.99999999999998))
            ThreePointArc((-78.00000000000004, 35.99999999999998), (-78.88388347648322, 35.63388347648316), (-79.25000000000004, 34.74999999999998))
        make_face()
    extrude(amount=BOSS_EXTRUDE7_DEPTH)

    # Sketch17 → Cut-Extrude6 (cut)
    with BuildSketch(Plane.XZ.offset(-105)):
        with Locations((-9.695908791144348, 54.3605461890202)):
            Rectangle(SKETCH17_W, SKETCH17_H)
        with BuildLine():
            Line((77.99999999999996, -32.749999999999986), (77.99999999999996, 32.750000000000014))
            ThreePointArc((77.99999999999996, 32.750000000000014), (77.41421356237305, 34.16421356237311), (75.99999999999996, 34.750000000000014))
            Line((75.99999999999996, 34.750000000000014), (-76.00000000000004, 34.750000000000014))
            ThreePointArc((-76.00000000000004, 34.750000000000014), (-77.41421356237313, 34.16421356237311), (-78.00000000000004, 32.750000000000014))
            Line((-78.00000000000004, 32.750000000000014), (-78.00000000000004, -32.749999999999986))
            ThreePointArc((-78.00000000000004, -32.749999999999986), (-77.41421356237313, -34.16421356237308), (-76.00000000000004, -34.749999999999986))
            Line((-76.00000000000004, -34.749999999999986), (75.99999999999996, -34.749999999999986))
            ThreePointArc((75.99999999999996, -34.749999999999986), (77.41421356237305, -34.16421356237308), (77.99999999999996, -32.749999999999986))
        make_face(mode=Mode.SUBTRACT)
    extrude(amount=CUT_EXTRUDE6_DEPTH, mode=Mode.SUBTRACT)


with BuildPart() as cut_extrude6_piece_1:
    # of the separate pieces the step leaves, piece 1, a body of its own (cut_extrude6_pieces)
    add(part_1.part.solids().sort_by_distance((-76, 105, -34.25))[0])

    # Fillet6
    fillet6_edges = [cut_extrude6_piece_1.edges().sort_by_distance(p)[0] for p in [
        (-78.88388347648322, 106.5, -35.633883476483156),
        (-79.25000000000004, 106.5, 61.50000000000002),
        (-78.88388347648322, 106.5, 158.63388347648322),
        (-1.421e-14, 106.5, 159.00000000000003),
        (78.88388347648318, 106.5, 158.63388347648322),
        (79.24999999999994, 106.5, 61.50000000000003),
        (78.8838834764831, 106.5, -35.63388347648314),
        (-4.263e-14, 106.5, -35.99999999999997),
    ]]
    fillet(fillet6_edges, radius=FILLET6_R)

    # Sketch21 → Cut-Extrude11 (cut)
    with BuildSketch(Plane(origin=(0, 106.5, 0), x_dir=(1, 0, 0), z_dir=(0, 1, 0))):
        with Locations(Location((-75.68068975770814, -155.43068975770817, 0), (0, 0, 270))):
            Circle(SKETCH21_R)
        with Locations(Location((75.68068975770811, -155.43068975770834, 0), (0, 0, 270))):
            Circle(SKETCH21_R)
    extrude(amount=-CUT_EXTRUDE11_DEPTH, mode=Mode.SUBTRACT)

    # Sketch22 → Cut-Extrude12 (cut)
    with BuildSketch(Plane(origin=(0, 106.5, 0), x_dir=(1, 0, 0), z_dir=(0, 1, 0))):
        with Locations(Location((-53.000000000000014, -122.75000000000003, 0), (0, 0, 270))):
            Circle(SKETCH22_R)
        with Locations(Location((53.000000000000014, -121.25000000000003, 0), (0, 0, 270))):
            Circle(SKETCH22_R_2)
        with Locations(Location((53.000000000000014, -124.25000000000003, 0), (0, 0, 270))):
            Circle(SKETCH22_R_2)
        with Locations(Location((48.000000000000014, -122.75000000000003, 0), (0, 0, 270))):
            Circle(SKETCH22_R_3)
    extrude(amount=-CUT_EXTRUDE12_DEPTH, mode=Mode.SUBTRACT)

    # Sketch23 → Cut-Extrude13 (cut)
    with BuildSketch(Plane.XZ.offset(-105)):
        with Locations((5.748765940339929, 69.87855319631414)):
            Rectangle(SKETCH23_W, SKETCH23_H)
    extrude(amount=-CUT_EXTRUDE13_DEPTH, mode=Mode.SUBTRACT)


with BuildPart() as cut_extrude6_piece_2:
    # of the separate pieces the step leaves, piece 2, a body of its own (cut_extrude6_pieces)
    add(part_1.part.solids().sort_by_distance((-78, 2, -32.75))[0])

    # Sketch18 → Cut-Extrude7 (cut)
    with BuildSketch(Plane.XZ.offset(-99.99999999999999)):
        Rectangle(SKETCH18_W, SKETCH18_H)
    extrude(amount=CUT_EXTRUDE7_DEPTH, mode=Mode.SUBTRACT)


with BuildPart() as cut_extrude13_piece_1:
    # of the separate pieces the step leaves, piece 1, a body of its own (cut_extrude13_pieces)
    add(cut_extrude6_piece_1.part.solids().sort_by_distance((-79.25, 105, 59.878553196))[0])


with BuildPart() as cut_extrude13_piece_2:
    # of the separate pieces the step leaves, piece 2, a body of its own (cut_extrude13_pieces)
    add(cut_extrude6_piece_1.part.solids().sort_by_distance((-78, 105.25, 159))[0])

    # Sketch24 → Cut-Extrude14 (cut)
    with BuildSketch(Plane(origin=(0, 0, 79.87855319631414), x_dir=(-1, 0, 0), z_dir=(0, 0, -1))):
        with Locations((-6.53504656057757, 105)):
            Rectangle(SKETCH24_W, SKETCH24_H)
    extrude(amount=-CUT_EXTRUDE14_DEPTH, mode=Mode.SUBTRACT)


solid = cut_extrude13_piece_1.part
